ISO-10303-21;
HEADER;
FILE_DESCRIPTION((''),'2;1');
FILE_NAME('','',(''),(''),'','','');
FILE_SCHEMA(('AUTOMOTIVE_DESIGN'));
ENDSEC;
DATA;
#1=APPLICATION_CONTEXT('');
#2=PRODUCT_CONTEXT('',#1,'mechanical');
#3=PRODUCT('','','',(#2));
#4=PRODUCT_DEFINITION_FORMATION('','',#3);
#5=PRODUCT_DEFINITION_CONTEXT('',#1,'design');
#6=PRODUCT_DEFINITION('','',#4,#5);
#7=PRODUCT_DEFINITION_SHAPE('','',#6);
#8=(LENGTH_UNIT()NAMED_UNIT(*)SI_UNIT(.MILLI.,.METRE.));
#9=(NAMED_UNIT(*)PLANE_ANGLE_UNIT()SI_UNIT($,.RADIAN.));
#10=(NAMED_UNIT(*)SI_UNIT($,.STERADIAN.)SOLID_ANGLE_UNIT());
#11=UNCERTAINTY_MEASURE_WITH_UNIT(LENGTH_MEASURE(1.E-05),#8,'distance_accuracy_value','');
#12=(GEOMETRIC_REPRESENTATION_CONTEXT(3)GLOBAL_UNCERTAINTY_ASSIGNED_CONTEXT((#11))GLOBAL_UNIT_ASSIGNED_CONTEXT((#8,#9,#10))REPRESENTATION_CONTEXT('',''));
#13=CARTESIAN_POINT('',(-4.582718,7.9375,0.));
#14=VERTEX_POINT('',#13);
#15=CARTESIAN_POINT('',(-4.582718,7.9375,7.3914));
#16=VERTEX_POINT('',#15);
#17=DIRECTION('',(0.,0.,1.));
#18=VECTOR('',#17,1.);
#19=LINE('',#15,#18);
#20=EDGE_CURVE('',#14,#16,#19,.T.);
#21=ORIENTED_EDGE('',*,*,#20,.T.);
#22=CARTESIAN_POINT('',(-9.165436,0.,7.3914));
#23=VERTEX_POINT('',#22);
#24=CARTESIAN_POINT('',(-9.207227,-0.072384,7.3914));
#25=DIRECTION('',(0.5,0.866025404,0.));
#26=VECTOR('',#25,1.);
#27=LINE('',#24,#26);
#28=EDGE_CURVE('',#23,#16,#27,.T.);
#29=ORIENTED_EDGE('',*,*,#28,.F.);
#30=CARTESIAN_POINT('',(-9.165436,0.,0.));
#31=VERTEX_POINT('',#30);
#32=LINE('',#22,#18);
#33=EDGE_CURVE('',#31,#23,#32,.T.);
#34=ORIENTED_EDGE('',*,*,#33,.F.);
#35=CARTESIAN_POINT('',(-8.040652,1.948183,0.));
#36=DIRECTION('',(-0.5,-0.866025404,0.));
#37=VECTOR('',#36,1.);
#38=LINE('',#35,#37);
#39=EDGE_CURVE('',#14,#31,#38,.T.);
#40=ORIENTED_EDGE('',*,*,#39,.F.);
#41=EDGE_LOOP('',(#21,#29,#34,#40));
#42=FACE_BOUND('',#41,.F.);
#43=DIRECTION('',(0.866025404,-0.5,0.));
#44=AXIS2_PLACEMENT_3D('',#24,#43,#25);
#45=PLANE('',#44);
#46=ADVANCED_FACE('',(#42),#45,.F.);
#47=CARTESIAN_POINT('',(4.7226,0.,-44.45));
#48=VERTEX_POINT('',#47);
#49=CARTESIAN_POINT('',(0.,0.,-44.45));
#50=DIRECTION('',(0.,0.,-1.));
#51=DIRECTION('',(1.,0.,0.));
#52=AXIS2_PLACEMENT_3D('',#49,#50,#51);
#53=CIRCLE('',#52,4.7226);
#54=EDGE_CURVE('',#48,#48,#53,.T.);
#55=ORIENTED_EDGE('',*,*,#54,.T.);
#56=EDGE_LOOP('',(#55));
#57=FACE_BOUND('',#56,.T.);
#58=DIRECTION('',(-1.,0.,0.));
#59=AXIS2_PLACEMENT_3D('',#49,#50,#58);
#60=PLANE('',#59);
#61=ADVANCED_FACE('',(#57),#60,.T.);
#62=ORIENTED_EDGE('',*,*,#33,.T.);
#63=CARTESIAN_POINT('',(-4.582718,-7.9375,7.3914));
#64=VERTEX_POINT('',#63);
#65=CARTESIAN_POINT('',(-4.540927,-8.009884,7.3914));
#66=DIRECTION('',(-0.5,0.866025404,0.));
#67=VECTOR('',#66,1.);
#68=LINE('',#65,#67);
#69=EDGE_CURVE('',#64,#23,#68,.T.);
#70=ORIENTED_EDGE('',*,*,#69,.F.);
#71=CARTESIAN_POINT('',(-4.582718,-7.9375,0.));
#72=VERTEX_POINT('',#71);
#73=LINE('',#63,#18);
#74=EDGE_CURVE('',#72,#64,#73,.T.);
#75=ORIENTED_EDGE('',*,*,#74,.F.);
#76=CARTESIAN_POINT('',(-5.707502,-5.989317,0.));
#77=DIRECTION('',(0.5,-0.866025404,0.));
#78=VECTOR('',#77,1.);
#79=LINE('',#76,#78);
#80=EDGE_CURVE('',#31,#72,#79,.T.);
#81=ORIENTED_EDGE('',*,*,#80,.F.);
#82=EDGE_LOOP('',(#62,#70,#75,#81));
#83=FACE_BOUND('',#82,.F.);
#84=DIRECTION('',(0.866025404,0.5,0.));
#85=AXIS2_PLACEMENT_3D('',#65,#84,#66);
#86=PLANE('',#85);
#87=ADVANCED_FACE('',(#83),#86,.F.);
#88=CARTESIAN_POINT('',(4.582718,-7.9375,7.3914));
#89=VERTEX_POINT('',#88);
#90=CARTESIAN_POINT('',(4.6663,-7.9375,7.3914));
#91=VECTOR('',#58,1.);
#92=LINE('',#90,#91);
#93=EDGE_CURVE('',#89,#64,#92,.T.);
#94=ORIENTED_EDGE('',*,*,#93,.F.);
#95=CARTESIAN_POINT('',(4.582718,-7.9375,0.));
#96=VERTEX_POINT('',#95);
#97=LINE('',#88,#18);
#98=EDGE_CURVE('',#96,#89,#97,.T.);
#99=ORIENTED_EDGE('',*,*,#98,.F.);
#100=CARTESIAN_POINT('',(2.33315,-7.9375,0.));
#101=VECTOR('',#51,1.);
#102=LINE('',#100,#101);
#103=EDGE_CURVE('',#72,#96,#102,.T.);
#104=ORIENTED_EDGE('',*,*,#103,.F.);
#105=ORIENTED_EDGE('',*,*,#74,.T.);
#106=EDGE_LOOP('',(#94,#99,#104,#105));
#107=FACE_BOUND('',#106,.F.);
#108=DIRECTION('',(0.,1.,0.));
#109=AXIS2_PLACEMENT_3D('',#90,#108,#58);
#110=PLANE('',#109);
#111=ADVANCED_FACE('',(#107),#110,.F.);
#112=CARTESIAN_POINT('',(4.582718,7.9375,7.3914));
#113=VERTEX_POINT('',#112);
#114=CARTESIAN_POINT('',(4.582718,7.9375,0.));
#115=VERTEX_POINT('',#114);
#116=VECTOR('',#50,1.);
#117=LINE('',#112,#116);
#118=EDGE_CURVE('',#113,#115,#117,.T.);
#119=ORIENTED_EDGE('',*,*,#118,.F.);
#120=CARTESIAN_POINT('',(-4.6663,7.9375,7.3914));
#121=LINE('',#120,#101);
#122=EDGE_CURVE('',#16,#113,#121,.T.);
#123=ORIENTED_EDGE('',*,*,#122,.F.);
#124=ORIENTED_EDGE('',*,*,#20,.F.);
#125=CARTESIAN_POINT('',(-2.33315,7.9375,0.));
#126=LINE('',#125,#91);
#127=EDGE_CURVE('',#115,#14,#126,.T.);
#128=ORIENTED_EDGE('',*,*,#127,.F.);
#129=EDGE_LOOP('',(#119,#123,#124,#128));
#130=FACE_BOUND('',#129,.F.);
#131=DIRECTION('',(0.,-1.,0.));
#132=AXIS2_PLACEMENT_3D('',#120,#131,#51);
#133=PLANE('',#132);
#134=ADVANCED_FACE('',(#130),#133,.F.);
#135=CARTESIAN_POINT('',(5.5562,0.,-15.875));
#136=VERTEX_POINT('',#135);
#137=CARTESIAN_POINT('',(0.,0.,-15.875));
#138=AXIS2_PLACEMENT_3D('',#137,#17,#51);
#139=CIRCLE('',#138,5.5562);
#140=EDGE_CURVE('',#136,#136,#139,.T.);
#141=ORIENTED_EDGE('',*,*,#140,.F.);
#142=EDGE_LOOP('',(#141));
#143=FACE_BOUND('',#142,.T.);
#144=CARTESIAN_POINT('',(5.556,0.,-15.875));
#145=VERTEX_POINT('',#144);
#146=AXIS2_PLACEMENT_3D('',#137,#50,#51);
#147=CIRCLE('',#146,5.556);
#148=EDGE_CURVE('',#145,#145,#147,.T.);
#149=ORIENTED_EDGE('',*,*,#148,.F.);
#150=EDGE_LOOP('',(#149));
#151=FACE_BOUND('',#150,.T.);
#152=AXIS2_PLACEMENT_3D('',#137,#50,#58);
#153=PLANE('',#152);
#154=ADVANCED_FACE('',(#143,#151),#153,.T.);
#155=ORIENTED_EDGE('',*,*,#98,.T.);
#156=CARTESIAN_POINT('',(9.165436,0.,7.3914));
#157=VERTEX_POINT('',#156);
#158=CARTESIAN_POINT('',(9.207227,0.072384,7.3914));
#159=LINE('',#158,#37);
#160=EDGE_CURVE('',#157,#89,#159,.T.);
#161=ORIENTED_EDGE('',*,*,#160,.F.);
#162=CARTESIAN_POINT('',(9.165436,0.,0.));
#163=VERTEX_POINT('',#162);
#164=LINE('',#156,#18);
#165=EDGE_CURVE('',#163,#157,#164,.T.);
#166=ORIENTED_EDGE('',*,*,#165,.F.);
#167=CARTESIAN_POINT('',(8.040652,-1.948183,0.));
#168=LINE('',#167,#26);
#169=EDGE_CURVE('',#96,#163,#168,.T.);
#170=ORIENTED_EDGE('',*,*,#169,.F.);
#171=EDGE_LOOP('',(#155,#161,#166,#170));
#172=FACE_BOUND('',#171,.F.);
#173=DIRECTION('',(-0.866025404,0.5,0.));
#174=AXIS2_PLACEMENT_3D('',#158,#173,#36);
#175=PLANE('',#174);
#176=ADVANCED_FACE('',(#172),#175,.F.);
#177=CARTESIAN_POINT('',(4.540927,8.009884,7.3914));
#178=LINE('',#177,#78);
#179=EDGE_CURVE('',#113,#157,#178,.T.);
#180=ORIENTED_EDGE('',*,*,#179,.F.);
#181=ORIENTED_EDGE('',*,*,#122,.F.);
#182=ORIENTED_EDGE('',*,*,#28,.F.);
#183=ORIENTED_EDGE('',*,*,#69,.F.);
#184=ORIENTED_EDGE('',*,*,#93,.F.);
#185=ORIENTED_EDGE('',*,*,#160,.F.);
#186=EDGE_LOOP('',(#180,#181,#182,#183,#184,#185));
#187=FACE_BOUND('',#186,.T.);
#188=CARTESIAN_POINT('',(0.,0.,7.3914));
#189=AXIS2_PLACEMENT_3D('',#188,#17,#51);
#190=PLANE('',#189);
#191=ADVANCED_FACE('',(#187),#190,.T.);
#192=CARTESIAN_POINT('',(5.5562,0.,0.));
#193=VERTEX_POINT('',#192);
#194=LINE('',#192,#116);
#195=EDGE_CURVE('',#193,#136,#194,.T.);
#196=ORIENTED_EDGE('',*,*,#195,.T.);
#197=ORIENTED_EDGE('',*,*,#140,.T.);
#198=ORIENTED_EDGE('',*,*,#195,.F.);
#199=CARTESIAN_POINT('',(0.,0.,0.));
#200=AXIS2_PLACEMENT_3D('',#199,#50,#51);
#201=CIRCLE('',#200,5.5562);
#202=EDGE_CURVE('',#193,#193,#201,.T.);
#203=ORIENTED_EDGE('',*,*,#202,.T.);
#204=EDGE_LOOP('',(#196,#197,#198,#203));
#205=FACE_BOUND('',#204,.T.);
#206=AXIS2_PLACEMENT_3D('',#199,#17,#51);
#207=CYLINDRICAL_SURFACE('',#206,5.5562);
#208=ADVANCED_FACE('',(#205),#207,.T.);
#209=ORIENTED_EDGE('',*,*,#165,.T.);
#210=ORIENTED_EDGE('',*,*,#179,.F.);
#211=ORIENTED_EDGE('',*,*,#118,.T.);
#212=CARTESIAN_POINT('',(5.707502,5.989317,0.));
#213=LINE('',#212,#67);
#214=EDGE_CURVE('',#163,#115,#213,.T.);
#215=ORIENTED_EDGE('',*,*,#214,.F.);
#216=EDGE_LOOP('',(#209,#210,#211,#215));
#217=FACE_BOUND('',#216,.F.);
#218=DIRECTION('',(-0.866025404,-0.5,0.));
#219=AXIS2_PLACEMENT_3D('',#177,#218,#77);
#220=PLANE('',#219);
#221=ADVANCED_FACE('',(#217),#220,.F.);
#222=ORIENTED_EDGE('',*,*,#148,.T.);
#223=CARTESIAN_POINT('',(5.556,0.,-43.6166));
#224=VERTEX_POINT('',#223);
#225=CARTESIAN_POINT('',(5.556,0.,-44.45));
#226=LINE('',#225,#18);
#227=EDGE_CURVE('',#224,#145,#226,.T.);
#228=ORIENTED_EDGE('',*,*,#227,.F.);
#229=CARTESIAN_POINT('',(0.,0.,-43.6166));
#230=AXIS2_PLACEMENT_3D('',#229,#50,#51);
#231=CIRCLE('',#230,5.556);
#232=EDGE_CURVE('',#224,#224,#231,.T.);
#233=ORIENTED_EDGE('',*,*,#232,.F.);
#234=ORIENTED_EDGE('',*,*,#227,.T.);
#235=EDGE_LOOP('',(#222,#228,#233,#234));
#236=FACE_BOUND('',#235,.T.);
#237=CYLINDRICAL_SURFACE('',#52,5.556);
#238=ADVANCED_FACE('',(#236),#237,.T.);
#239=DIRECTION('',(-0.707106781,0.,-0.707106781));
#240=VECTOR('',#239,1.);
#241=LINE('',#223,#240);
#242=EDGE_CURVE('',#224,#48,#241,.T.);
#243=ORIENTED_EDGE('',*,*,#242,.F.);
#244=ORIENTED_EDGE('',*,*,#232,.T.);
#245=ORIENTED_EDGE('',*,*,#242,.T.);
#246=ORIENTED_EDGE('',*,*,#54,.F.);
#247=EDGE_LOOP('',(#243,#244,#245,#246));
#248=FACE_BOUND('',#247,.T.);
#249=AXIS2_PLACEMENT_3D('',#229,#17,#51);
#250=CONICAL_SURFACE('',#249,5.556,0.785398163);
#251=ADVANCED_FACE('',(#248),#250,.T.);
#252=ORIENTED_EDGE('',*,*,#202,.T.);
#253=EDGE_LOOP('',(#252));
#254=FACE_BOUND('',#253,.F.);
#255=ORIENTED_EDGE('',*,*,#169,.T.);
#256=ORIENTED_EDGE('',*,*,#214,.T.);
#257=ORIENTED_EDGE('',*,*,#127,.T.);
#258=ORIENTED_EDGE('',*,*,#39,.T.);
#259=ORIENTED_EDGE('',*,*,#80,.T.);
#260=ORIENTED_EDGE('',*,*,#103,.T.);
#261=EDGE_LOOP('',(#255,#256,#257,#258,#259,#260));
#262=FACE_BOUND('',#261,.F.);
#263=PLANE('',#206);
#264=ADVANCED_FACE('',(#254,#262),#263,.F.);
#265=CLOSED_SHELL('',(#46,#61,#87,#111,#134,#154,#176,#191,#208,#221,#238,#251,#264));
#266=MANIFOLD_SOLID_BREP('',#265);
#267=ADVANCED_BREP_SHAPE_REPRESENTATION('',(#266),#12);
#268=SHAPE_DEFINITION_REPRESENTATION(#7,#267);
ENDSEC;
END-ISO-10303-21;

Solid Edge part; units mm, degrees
sketch "Sketch1" plane through (0, 0, 0) normal (0, 0, 1) x (1, 0, 0)
  circle A0 centre (0, 0) radius 9.2075
  dimension "D1" = 18.415
extrude "Protrusion1" add sketch "Sketch1" along normal blind 7.3914
sketch "Sketch2" plane through (0, 0, 0) normal (0, 0, -1) x (1, 0, 0)
  circle A0 centre (0, 0) radius 5.5562
extrude "Protrusion2" add sketch "Sketch2" along normal blind 44.45
sketch "Sketch3" plane through (0, 0, -44.45) normal (0, 0, -1) x (1, 0, 0)
  circle A0 centre (0, 0) radius 5.556
extrude "Cutout1" cut sketch "Sketch3" against normal blind 28.575 flip side to cut
chamfer "Chamfer_1" distance 0.8334 angle 45 1 edges at (-5.556, 0, -44.45)
sketch "Sketch4" plane through (0, 0, 7.3914) normal (0, 0, 1) x (1, 0, 0)
  line L0 (-4.6663, 7.9375) -> (4.6663, 7.9375)
  dimension "D1" = 15.875
extrude "Cutout2" cut sketch "Sketch4" against normal up to next material side at (0, 7.9875, 7.3914)
pattern_circular "Pattern1" count 6 over 360 about axis through (0, 0, 7.3914) along (0, 0, 1) of "Cutout2"
properties part number "24102602"
